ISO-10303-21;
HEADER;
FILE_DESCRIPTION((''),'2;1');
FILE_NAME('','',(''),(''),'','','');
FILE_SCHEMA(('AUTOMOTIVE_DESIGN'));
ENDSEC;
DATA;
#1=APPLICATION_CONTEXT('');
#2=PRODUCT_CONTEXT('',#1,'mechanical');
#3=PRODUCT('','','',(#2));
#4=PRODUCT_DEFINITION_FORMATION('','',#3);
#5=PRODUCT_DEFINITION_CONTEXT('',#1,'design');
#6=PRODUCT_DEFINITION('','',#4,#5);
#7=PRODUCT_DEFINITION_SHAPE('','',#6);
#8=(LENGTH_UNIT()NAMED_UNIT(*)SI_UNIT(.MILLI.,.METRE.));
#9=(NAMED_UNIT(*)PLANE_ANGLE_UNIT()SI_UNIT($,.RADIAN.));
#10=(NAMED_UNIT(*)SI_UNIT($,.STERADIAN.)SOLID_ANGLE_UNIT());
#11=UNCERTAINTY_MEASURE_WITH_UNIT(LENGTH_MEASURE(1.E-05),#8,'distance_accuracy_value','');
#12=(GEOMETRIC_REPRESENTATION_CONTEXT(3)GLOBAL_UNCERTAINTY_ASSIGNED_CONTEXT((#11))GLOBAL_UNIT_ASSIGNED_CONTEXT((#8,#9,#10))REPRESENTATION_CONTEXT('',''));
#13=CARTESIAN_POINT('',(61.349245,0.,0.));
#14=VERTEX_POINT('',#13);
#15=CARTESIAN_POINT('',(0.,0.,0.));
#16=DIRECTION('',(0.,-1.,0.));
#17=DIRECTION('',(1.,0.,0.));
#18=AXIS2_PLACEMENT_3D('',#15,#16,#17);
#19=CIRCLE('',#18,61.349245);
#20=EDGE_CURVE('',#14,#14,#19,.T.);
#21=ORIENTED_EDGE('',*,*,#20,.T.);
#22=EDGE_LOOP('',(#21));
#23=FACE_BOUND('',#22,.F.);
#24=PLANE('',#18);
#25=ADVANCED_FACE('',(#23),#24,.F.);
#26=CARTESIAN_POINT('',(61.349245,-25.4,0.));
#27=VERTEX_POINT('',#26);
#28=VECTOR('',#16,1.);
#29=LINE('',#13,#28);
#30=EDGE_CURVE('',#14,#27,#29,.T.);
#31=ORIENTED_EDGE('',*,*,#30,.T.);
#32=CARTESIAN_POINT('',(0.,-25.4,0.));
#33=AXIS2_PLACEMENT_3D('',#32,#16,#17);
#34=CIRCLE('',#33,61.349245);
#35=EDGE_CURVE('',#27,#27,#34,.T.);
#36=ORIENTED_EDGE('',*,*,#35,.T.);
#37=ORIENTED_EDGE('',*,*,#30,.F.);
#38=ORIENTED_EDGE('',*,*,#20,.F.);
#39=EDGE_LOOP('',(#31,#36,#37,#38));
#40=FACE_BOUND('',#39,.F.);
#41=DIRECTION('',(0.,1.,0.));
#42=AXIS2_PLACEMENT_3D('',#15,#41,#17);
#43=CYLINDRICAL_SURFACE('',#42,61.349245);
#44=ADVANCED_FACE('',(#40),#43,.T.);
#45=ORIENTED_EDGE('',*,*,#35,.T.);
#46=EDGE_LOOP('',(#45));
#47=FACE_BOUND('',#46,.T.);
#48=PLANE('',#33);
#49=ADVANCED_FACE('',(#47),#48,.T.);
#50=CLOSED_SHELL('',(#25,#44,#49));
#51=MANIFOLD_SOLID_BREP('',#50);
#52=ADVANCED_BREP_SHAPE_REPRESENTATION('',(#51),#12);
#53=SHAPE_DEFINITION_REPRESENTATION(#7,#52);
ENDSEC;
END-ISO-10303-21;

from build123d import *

# Parameters (mm, degrees)
F0_R     = 61.349245048
F2_DEPTH = 25.4
F1_R     = 61.349245048
F4_DEPTH = 25.4


# Not quite as in the source:
# - the program builds the solid bodies; features that only make, move or delete a surface that nothing else refers to are left out


with BuildPart() as f2:
    # F0 (on Front) → F2 (new body)
    with BuildSketch(Plane.XZ):
        Circle(F0_R)
    extrude(amount=F2_DEPTH)

    # F1 (on face) → F4 (join)
    with BuildSketch(Plane.XZ):
        Circle(F1_R)
    extrude(amount=F4_DEPTH)


solid = f2.part
